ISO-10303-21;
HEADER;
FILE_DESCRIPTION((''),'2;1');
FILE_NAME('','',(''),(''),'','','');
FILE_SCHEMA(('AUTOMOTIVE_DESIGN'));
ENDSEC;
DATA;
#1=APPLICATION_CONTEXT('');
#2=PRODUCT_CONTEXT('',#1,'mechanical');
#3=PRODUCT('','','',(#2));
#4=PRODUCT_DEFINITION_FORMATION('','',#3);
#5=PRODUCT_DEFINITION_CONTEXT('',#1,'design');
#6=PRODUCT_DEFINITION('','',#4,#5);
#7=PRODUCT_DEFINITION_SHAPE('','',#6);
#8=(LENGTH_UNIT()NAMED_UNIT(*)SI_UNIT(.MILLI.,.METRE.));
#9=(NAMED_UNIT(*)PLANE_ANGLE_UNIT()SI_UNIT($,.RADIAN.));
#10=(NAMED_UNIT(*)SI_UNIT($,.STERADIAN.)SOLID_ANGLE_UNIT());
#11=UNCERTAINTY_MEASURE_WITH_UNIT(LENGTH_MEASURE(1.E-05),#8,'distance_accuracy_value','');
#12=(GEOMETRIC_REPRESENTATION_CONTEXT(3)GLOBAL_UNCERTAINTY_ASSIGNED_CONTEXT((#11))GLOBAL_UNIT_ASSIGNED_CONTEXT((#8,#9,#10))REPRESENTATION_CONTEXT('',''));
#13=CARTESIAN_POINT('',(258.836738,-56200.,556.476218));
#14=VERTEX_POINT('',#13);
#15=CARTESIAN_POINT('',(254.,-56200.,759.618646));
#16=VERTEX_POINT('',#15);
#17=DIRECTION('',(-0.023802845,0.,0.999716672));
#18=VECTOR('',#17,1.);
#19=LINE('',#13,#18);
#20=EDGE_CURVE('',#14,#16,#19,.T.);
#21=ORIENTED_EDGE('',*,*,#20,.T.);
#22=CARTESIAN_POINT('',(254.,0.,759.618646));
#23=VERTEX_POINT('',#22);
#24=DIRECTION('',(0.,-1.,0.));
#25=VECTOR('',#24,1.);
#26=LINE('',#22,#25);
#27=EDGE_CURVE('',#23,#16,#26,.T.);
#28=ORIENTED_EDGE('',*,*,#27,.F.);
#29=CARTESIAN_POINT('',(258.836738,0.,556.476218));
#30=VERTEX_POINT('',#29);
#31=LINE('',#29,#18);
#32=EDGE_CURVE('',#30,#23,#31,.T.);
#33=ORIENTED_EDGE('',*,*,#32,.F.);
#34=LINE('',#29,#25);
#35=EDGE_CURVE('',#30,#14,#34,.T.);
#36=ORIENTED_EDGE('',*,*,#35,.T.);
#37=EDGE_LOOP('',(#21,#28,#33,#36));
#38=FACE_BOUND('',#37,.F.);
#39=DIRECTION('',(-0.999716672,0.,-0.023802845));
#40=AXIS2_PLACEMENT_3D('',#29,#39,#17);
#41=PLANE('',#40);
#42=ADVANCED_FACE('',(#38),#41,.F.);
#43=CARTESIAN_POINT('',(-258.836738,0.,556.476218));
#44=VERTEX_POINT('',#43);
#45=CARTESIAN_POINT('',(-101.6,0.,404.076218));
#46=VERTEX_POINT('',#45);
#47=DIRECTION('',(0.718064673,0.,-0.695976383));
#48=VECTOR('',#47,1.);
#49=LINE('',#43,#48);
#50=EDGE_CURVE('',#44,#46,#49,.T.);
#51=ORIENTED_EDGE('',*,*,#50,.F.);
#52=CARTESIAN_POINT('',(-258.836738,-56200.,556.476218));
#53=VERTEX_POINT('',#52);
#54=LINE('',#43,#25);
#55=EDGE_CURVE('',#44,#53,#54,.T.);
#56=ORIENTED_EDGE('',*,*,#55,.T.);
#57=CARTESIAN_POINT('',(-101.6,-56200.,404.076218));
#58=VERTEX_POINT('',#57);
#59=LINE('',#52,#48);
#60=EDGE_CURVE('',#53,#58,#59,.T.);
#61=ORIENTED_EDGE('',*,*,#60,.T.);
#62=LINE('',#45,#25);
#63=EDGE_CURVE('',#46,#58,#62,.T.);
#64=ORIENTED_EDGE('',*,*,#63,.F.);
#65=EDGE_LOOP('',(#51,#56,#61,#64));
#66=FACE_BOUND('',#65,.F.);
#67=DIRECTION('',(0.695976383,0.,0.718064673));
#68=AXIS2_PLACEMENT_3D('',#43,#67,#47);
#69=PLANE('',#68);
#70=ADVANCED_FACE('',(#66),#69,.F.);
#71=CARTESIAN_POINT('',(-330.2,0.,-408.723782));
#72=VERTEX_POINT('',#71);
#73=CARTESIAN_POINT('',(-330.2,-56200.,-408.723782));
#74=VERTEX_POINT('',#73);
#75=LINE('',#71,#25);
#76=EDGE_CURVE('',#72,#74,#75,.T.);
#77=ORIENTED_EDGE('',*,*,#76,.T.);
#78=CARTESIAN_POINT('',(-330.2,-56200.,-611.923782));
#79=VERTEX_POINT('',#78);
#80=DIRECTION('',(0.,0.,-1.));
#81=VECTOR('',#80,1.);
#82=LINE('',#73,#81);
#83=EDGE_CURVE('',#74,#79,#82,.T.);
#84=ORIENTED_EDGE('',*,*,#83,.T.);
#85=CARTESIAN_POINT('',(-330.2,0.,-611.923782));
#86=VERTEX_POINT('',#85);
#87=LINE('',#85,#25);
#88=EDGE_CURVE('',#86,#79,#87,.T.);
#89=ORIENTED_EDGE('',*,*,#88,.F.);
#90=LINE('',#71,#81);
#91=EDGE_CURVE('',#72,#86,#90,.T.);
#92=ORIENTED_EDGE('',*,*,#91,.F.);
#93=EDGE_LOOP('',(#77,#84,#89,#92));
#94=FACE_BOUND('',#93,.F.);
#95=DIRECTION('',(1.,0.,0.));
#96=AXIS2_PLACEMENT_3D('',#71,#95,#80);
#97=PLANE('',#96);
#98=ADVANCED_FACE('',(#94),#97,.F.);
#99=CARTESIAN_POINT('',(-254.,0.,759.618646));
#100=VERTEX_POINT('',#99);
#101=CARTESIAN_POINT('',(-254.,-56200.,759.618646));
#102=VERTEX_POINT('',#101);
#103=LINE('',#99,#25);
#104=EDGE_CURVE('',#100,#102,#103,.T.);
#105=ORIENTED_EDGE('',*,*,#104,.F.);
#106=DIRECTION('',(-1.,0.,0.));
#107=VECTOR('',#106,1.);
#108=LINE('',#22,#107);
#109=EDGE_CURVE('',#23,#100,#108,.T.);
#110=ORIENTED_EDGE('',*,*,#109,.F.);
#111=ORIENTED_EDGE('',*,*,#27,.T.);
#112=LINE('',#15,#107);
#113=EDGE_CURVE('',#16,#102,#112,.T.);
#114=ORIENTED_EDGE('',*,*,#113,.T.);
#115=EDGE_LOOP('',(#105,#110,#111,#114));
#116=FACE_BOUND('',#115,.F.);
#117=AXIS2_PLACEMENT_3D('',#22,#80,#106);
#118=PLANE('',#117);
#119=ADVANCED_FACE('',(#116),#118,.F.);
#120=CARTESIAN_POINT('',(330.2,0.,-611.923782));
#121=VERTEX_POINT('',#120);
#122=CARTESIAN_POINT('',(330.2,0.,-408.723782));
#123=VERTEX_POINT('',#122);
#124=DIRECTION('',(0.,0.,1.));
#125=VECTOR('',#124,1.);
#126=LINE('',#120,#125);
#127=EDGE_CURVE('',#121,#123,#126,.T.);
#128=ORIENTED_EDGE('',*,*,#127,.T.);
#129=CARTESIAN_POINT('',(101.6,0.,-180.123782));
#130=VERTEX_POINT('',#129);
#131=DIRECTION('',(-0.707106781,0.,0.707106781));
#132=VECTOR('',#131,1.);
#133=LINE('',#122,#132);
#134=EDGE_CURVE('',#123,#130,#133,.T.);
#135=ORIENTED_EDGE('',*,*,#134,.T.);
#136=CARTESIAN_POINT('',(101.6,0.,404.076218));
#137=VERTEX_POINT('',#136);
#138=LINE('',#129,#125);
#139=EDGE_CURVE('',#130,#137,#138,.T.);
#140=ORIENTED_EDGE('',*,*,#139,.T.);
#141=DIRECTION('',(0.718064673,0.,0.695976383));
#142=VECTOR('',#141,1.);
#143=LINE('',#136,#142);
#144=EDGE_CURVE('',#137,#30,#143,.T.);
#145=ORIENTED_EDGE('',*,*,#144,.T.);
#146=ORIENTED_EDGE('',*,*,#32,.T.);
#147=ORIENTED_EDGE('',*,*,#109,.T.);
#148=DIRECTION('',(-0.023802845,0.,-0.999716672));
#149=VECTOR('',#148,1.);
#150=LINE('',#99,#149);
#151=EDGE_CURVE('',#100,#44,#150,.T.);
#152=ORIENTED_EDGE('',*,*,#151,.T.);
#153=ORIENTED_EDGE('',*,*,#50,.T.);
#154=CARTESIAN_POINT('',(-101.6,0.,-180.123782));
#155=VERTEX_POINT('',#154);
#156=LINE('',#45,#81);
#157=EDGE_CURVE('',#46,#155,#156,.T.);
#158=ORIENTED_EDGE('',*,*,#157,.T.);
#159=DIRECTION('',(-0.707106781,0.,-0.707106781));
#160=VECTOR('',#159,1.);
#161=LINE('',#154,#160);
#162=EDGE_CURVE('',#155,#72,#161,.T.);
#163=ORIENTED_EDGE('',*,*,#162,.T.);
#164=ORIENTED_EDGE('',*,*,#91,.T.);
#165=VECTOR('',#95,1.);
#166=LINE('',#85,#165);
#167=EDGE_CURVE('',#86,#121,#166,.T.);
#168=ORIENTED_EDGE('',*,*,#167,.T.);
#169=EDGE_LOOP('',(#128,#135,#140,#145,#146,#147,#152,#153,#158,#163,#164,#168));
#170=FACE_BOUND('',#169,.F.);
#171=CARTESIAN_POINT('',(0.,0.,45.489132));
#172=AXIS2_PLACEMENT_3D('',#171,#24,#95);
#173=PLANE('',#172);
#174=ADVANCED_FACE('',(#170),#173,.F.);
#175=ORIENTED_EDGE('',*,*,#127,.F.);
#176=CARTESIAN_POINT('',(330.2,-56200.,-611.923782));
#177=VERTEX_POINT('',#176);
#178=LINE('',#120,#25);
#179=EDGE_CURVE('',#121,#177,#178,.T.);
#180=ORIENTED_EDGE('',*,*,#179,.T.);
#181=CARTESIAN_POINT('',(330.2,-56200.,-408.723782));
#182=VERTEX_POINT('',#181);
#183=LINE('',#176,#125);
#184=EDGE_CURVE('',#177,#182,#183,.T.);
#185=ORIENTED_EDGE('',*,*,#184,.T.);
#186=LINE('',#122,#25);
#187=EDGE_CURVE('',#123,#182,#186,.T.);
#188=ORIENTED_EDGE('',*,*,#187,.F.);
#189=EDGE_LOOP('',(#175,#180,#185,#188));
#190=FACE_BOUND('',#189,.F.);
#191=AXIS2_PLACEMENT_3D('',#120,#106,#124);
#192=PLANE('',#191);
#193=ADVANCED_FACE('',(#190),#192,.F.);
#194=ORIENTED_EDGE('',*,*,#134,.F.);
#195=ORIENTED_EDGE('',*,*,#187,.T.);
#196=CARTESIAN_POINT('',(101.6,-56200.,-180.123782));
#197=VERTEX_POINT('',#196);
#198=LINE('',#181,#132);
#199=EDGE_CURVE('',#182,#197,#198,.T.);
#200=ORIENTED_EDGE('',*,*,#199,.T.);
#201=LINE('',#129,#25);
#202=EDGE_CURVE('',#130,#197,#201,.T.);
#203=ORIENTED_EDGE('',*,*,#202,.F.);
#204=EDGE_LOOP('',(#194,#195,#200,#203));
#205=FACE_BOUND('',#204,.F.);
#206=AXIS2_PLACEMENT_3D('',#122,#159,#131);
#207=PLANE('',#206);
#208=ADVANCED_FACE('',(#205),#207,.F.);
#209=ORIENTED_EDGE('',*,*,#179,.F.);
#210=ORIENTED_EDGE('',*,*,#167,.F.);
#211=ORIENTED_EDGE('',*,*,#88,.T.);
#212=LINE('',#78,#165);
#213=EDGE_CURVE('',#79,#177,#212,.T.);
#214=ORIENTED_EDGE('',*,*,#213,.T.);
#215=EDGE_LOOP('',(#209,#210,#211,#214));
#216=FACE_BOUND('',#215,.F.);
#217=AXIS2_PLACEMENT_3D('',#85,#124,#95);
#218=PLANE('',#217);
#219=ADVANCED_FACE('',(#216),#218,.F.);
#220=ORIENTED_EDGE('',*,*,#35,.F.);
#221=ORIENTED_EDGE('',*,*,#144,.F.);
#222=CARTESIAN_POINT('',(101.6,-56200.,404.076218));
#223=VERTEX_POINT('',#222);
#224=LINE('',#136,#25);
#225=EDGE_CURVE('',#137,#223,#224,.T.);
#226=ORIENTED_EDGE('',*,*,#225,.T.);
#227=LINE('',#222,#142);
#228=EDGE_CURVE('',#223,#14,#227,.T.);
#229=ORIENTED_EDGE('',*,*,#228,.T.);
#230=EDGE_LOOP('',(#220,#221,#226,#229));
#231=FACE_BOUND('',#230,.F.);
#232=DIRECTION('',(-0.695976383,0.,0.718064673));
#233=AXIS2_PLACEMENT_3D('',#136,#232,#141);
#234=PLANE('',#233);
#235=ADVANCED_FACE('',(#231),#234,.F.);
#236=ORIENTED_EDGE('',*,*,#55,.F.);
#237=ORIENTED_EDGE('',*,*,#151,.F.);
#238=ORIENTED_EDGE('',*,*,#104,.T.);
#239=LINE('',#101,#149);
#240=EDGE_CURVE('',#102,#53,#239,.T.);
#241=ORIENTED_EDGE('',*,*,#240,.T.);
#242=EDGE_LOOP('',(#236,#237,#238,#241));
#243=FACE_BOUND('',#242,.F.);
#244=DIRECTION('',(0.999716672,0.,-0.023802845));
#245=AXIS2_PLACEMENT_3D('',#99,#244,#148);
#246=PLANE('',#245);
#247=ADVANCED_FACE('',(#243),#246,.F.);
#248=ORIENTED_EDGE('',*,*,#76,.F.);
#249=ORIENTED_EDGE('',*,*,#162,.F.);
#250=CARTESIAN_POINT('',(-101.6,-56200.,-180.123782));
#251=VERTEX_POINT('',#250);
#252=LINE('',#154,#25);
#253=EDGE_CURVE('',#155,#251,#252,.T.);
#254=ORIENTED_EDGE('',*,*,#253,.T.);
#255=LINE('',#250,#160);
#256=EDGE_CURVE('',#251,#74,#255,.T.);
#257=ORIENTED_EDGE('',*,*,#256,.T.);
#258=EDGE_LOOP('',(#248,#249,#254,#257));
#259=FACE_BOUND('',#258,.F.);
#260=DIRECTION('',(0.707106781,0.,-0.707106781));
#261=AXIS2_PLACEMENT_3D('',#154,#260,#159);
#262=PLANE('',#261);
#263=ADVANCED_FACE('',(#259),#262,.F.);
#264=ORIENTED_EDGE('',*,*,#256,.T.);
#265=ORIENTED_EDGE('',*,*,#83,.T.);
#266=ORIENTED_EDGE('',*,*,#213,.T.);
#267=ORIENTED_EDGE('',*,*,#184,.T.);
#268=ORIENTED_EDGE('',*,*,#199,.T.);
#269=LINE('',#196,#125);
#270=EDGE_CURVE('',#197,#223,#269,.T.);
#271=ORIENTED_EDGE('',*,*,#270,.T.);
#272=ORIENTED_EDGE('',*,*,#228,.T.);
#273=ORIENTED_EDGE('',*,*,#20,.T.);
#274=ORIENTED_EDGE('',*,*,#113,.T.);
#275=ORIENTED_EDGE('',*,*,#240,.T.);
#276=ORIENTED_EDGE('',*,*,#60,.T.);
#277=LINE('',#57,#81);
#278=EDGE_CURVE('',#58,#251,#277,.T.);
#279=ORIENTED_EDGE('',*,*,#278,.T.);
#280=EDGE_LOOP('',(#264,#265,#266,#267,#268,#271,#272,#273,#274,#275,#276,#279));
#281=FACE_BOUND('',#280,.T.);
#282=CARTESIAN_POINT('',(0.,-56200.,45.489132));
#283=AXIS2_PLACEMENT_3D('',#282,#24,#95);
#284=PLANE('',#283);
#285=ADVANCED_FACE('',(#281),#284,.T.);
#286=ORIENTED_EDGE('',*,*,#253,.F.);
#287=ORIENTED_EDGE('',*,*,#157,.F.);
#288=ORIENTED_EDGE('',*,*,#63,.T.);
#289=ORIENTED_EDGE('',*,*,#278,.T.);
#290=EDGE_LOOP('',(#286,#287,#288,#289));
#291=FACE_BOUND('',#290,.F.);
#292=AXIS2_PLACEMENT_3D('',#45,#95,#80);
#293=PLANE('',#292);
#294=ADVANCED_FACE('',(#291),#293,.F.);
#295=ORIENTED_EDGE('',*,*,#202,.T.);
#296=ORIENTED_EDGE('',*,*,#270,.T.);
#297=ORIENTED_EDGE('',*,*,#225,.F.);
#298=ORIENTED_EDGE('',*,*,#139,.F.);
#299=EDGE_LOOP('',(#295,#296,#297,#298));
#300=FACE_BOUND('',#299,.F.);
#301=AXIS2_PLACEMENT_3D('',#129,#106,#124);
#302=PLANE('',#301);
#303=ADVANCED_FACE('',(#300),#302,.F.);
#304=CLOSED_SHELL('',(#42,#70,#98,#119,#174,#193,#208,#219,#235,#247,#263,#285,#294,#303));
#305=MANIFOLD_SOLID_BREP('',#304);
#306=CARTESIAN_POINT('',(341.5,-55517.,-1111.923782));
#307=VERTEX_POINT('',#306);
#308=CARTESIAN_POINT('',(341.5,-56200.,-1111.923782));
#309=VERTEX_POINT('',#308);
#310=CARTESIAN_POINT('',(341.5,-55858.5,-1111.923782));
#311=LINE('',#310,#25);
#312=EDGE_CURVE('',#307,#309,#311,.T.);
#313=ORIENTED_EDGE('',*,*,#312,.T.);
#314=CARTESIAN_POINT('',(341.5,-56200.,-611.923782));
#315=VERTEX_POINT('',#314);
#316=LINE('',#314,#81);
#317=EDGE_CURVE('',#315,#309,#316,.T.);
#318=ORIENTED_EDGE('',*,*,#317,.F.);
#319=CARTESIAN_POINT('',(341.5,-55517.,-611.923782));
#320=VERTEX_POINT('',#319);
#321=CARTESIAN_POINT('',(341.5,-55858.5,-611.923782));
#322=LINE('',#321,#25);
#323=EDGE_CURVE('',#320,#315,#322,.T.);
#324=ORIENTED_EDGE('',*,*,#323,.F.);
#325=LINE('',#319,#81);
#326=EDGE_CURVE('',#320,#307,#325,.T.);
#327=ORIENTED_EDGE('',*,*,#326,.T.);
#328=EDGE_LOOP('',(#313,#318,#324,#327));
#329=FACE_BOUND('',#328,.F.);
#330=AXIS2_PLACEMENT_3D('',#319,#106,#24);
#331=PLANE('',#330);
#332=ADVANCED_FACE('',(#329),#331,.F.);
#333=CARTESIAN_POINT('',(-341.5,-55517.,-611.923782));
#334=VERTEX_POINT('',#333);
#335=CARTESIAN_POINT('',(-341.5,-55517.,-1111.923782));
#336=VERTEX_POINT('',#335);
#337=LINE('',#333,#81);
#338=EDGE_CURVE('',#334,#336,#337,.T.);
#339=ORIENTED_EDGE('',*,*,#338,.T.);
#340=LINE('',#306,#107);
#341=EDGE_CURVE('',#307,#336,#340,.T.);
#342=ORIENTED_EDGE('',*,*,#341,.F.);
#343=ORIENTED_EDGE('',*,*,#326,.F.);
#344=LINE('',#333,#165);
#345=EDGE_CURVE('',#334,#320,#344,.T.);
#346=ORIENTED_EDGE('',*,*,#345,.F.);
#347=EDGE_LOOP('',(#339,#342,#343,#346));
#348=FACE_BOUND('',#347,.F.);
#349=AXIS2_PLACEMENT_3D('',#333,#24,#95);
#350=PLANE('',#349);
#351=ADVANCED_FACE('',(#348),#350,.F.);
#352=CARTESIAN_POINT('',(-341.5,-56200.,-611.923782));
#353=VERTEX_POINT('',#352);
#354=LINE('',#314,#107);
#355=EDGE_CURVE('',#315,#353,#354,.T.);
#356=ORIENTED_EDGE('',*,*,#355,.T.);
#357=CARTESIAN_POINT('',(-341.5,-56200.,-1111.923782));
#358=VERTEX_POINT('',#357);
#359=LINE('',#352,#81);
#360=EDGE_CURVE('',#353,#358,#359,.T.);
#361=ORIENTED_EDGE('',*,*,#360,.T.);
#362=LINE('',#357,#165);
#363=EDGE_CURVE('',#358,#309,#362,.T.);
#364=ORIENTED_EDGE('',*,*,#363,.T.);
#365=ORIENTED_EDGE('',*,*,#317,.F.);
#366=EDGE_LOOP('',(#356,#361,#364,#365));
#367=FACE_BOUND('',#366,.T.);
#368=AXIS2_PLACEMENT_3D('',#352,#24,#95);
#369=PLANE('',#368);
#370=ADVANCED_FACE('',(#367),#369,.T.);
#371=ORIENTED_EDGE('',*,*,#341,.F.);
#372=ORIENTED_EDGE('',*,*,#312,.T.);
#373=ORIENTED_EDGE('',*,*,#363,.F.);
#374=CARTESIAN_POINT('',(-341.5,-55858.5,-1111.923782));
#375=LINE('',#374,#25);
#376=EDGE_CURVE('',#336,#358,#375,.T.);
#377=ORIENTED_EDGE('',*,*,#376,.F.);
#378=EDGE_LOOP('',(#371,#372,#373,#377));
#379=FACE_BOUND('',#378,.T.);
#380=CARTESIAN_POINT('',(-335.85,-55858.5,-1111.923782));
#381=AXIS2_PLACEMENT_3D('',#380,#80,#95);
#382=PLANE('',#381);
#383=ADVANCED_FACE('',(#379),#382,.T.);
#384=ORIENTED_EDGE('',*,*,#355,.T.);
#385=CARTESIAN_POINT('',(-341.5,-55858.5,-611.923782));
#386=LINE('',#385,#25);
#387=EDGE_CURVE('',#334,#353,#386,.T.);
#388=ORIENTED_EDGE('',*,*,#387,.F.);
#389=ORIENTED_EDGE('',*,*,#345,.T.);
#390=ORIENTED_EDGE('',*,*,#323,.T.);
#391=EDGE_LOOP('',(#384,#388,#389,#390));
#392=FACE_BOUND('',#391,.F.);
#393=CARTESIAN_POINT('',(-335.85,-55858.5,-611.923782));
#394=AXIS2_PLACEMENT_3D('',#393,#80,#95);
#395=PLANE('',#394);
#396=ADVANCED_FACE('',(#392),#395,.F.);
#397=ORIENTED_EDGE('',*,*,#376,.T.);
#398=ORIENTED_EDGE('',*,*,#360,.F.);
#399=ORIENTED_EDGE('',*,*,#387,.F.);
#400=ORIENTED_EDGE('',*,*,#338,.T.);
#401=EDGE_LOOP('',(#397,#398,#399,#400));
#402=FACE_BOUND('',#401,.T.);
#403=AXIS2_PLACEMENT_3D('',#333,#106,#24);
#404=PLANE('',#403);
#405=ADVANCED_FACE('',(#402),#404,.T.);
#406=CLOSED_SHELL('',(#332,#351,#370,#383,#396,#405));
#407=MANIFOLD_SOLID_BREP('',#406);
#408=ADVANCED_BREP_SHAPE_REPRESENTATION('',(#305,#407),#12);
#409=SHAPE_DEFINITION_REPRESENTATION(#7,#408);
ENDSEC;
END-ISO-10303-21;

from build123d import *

# Parameters (mm, degrees)
F1_DEPTH = 56200
F3_W     = 660.4
F3_H     = 683
F4_DEPTH = 500
F3_W_2   = 11.3
F5_DEPTH = 500
F6_DEPTH = 500


with BuildPart() as f1:
    # F0 (on Front) → F1 (new body)
    with BuildSketch(Plane.XZ):
        Polygon((254, 759.618646022), (0, 759.618646022), (-254, 759.618646022), (-258.8367380354, 556.47621824), (-101.6, 404.07621824), (-101.6, -180.12378176), (-330.2, -408.72378176), (-330.2, -611.92378176), (0, -611.92378176), (330.2, -611.92378176), (330.2, -408.72378176), (101.6, -180.12378176), (101.6, 404.07621824), (258.8367380354, 556.47621824), align=None)
    extrude(amount=F1_DEPTH)


with BuildPart() as f4:
    # F3 (on face) → F4 (new body)
    with BuildSketch(Plane(origin=(0, 0, -611.92378176), x_dir=(1, 0, 0), z_dir=(0, 0, -1))):
        with Locations((0, 55858.5)):
            Rectangle(F3_W, F3_H)
    extrude(amount=F4_DEPTH)

    # F3 (on face) → F5 (join)
    with BuildSketch(Plane(origin=(0, 0, -611.92378176), x_dir=(1, 0, 0), z_dir=(0, 0, -1))):
        with Locations((335.85, 55858.5)):
            Rectangle(F3_W_2, F3_H)
    extrude(amount=F5_DEPTH)

    # F3 (on face) → F6 (join)
    with BuildSketch(Plane(origin=(0, 0, -611.92378176), x_dir=(1, 0, 0), z_dir=(0, 0, -1))):
        with Locations((-335.85, 55858.5)):
            Rectangle(F3_W_2, F3_H)
    extrude(amount=F6_DEPTH)


solid = Compound([f1.part, f4.part])
